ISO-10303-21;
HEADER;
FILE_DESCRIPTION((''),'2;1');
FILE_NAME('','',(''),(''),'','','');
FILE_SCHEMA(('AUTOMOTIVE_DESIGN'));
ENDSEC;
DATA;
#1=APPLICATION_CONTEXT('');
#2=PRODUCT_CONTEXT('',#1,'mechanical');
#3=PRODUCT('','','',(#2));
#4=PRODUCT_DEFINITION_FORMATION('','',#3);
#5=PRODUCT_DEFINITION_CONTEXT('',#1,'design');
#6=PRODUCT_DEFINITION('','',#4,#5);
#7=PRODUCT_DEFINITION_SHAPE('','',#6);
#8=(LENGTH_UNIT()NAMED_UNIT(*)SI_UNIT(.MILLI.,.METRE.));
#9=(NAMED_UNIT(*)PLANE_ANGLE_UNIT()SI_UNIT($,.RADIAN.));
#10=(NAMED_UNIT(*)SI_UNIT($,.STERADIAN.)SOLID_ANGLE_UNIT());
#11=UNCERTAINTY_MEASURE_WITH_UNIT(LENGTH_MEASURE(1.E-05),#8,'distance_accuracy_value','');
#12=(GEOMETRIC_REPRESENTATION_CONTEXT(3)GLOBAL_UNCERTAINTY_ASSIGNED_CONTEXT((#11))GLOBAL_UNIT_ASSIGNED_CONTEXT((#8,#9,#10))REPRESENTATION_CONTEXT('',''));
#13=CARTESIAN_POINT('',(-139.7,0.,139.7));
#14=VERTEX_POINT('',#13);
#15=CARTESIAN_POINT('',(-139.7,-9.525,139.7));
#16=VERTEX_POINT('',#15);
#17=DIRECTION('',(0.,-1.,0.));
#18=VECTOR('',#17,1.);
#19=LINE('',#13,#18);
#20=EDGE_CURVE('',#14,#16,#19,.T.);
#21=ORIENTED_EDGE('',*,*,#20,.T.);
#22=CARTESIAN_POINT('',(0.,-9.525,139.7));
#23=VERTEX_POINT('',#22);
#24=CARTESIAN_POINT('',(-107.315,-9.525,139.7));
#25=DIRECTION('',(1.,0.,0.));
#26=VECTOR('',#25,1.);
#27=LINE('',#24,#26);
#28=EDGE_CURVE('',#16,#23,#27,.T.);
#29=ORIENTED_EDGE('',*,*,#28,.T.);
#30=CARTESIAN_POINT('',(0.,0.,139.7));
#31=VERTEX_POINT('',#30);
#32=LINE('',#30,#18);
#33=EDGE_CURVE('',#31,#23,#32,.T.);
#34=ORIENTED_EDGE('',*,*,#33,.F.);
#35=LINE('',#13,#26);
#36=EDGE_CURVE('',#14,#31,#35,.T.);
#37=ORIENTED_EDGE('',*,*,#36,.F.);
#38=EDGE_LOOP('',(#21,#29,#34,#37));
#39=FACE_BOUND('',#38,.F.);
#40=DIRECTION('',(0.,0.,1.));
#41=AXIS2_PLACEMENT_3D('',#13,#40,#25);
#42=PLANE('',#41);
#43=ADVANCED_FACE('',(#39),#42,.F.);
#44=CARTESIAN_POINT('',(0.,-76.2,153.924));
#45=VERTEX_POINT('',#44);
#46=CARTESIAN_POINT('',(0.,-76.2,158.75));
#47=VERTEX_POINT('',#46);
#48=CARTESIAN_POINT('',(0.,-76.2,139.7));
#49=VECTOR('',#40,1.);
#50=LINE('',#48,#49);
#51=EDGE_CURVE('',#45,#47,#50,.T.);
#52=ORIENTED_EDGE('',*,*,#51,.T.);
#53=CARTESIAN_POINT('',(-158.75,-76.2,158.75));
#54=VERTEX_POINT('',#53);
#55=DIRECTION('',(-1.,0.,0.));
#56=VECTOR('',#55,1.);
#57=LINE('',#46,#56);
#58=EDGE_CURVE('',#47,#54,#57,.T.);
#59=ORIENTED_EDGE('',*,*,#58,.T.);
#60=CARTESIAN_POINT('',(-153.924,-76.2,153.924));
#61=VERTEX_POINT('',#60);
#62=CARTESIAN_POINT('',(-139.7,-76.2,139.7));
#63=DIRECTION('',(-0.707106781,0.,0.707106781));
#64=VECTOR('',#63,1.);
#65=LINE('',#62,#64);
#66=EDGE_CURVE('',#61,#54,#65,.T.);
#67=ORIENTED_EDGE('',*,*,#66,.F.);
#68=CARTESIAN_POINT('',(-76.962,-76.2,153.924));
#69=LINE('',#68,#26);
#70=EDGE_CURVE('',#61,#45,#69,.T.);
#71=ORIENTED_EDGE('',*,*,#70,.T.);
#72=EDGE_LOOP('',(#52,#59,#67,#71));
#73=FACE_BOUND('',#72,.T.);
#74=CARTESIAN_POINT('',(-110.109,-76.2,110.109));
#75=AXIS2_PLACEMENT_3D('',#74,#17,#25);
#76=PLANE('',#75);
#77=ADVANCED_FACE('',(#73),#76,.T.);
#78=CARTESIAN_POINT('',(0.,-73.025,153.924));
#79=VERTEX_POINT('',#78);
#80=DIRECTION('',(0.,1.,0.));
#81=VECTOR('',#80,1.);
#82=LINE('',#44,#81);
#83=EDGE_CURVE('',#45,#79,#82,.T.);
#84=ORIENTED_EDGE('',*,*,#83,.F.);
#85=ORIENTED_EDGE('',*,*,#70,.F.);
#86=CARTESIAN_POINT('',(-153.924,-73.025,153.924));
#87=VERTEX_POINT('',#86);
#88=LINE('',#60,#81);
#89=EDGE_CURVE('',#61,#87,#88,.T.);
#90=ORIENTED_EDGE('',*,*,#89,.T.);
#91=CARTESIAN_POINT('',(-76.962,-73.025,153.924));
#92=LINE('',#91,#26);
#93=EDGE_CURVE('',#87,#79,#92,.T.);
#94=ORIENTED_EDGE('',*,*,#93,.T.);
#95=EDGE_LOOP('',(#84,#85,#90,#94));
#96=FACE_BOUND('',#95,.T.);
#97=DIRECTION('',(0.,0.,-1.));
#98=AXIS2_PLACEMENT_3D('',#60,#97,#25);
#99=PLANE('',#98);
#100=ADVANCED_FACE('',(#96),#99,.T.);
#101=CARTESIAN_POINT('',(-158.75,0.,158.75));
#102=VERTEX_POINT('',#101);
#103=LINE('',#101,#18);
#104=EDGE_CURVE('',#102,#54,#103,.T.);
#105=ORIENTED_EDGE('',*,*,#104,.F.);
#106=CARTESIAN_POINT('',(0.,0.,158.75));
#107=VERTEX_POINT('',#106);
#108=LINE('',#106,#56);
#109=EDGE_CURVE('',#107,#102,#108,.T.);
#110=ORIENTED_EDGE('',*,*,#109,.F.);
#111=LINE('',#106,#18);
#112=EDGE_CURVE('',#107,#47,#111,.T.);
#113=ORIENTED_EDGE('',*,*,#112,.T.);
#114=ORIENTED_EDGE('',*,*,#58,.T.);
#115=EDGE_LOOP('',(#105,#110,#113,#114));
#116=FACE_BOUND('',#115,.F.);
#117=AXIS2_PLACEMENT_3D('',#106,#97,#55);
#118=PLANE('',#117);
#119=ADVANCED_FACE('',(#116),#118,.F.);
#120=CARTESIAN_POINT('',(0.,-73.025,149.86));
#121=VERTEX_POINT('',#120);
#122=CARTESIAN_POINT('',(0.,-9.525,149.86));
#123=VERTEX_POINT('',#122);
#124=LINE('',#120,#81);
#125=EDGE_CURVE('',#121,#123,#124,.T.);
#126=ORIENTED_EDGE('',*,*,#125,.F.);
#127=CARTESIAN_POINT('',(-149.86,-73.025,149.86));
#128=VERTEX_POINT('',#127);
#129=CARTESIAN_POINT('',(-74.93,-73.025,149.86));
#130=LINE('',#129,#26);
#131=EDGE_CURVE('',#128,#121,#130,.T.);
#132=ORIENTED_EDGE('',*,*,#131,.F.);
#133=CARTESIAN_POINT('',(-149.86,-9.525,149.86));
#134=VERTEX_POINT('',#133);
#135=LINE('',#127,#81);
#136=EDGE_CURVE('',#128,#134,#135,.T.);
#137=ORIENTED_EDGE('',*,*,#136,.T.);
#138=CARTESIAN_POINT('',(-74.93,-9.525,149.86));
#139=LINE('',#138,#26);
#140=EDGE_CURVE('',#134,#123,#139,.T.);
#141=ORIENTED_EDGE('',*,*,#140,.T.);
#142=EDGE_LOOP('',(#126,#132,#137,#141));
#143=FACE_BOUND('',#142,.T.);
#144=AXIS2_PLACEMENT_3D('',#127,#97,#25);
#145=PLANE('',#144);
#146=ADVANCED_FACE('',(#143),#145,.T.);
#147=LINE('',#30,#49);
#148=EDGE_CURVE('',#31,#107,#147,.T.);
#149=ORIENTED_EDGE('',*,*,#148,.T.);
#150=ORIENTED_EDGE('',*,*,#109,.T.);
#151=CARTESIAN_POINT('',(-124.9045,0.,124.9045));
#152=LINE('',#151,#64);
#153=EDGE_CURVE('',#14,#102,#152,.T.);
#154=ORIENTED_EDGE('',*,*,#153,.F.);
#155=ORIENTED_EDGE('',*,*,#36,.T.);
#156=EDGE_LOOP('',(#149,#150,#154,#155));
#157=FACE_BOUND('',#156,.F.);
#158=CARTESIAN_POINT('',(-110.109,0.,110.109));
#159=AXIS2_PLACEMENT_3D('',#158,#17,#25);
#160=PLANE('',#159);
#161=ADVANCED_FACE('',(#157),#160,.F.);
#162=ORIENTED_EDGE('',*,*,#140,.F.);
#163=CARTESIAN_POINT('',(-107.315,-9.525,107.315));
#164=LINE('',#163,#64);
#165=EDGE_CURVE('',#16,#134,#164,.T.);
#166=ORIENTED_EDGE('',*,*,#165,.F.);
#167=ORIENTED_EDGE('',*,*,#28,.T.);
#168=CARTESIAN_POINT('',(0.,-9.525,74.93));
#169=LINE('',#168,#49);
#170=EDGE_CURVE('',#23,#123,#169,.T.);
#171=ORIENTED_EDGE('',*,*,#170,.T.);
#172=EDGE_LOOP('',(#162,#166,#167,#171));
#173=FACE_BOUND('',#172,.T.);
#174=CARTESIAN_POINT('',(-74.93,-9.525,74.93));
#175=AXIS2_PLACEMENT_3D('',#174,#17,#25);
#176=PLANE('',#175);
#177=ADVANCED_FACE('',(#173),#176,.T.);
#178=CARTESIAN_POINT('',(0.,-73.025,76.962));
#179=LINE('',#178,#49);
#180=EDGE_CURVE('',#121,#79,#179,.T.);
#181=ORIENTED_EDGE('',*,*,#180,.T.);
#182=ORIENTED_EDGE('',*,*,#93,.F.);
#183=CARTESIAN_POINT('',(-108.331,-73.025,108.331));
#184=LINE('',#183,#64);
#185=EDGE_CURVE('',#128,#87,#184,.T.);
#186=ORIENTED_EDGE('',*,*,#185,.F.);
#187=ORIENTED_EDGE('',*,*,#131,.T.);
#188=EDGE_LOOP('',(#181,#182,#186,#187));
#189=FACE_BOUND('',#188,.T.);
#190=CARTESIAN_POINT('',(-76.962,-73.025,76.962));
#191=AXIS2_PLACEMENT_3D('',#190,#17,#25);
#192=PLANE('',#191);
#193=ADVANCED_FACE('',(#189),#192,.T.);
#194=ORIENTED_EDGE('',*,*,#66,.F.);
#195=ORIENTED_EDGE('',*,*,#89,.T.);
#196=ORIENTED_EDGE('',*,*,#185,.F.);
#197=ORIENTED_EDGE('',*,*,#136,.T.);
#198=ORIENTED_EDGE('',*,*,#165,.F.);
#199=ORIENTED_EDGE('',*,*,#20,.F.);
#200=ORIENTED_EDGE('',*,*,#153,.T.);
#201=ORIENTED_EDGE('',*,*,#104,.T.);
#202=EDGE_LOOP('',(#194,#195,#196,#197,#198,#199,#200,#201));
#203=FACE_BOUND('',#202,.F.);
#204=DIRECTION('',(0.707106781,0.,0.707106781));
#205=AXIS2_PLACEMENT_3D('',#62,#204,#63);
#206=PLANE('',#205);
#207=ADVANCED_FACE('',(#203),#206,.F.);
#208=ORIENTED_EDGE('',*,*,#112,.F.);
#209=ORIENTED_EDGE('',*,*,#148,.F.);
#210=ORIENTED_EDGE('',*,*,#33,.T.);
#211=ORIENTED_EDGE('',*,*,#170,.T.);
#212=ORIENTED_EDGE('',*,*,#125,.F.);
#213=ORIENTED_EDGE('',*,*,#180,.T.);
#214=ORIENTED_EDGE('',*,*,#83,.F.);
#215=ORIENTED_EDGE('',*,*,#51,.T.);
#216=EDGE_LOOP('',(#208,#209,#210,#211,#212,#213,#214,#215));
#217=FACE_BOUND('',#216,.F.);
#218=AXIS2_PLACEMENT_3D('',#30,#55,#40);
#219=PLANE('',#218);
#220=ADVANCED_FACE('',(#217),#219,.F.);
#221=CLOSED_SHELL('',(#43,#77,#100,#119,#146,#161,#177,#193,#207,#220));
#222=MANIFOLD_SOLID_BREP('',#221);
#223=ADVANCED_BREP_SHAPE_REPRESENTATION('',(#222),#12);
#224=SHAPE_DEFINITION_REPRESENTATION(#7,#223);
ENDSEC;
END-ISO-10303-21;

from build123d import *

# Parameters (mm, degrees)
F1_DEPTH = 76.2
F2_W     = 153.924
F2_H     = 153.924
F3_DEPTH = 3.175
F4_W     = 149.86
F4_H     = 149.86
F5_DEPTH = 63.5
F7_DEPTH = 76.201


# Not quite as in the source:
# - a feature names something its author has since deleted; it is built from what else it names


with BuildPart() as f1:
    # F0 (on Front) → F1 (new body)
    with BuildSketch(Plane.XZ):
        Polygon((0, 139.7), (0, 158.75), (-158.75, 158.75), (-158.75, 0), (-139.7, 0), (-139.7, 139.7), align=None)
    extrude(amount=F1_DEPTH)

    # F2 (on face) → F3 (cut)
    with BuildSketch(Plane.XZ.offset(76.2)):
        with Locations((-76.962, 76.962)):
            Rectangle(F2_W, F2_H)
    extrude(amount=-F3_DEPTH, mode=Mode.SUBTRACT)

    # F4 (on face) → F5 (cut)
    with BuildSketch(Plane.XZ.offset(73.025)):
        with Locations((-74.93, 74.93)):
            Rectangle(F4_W, F4_H)
    extrude(amount=-F5_DEPTH, mode=Mode.SUBTRACT)

    # F6 (on face) → F7 (cut, through all)
    with BuildSketch(Plane.XZ.offset(76.2)):
        Polygon((-139.7, 139.7), (-158.75, 158.75), (-158.75, 0), (-139.7, 0), align=None)
    extrude(amount=-F7_DEPTH, mode=Mode.SUBTRACT)


solid = f1.part
